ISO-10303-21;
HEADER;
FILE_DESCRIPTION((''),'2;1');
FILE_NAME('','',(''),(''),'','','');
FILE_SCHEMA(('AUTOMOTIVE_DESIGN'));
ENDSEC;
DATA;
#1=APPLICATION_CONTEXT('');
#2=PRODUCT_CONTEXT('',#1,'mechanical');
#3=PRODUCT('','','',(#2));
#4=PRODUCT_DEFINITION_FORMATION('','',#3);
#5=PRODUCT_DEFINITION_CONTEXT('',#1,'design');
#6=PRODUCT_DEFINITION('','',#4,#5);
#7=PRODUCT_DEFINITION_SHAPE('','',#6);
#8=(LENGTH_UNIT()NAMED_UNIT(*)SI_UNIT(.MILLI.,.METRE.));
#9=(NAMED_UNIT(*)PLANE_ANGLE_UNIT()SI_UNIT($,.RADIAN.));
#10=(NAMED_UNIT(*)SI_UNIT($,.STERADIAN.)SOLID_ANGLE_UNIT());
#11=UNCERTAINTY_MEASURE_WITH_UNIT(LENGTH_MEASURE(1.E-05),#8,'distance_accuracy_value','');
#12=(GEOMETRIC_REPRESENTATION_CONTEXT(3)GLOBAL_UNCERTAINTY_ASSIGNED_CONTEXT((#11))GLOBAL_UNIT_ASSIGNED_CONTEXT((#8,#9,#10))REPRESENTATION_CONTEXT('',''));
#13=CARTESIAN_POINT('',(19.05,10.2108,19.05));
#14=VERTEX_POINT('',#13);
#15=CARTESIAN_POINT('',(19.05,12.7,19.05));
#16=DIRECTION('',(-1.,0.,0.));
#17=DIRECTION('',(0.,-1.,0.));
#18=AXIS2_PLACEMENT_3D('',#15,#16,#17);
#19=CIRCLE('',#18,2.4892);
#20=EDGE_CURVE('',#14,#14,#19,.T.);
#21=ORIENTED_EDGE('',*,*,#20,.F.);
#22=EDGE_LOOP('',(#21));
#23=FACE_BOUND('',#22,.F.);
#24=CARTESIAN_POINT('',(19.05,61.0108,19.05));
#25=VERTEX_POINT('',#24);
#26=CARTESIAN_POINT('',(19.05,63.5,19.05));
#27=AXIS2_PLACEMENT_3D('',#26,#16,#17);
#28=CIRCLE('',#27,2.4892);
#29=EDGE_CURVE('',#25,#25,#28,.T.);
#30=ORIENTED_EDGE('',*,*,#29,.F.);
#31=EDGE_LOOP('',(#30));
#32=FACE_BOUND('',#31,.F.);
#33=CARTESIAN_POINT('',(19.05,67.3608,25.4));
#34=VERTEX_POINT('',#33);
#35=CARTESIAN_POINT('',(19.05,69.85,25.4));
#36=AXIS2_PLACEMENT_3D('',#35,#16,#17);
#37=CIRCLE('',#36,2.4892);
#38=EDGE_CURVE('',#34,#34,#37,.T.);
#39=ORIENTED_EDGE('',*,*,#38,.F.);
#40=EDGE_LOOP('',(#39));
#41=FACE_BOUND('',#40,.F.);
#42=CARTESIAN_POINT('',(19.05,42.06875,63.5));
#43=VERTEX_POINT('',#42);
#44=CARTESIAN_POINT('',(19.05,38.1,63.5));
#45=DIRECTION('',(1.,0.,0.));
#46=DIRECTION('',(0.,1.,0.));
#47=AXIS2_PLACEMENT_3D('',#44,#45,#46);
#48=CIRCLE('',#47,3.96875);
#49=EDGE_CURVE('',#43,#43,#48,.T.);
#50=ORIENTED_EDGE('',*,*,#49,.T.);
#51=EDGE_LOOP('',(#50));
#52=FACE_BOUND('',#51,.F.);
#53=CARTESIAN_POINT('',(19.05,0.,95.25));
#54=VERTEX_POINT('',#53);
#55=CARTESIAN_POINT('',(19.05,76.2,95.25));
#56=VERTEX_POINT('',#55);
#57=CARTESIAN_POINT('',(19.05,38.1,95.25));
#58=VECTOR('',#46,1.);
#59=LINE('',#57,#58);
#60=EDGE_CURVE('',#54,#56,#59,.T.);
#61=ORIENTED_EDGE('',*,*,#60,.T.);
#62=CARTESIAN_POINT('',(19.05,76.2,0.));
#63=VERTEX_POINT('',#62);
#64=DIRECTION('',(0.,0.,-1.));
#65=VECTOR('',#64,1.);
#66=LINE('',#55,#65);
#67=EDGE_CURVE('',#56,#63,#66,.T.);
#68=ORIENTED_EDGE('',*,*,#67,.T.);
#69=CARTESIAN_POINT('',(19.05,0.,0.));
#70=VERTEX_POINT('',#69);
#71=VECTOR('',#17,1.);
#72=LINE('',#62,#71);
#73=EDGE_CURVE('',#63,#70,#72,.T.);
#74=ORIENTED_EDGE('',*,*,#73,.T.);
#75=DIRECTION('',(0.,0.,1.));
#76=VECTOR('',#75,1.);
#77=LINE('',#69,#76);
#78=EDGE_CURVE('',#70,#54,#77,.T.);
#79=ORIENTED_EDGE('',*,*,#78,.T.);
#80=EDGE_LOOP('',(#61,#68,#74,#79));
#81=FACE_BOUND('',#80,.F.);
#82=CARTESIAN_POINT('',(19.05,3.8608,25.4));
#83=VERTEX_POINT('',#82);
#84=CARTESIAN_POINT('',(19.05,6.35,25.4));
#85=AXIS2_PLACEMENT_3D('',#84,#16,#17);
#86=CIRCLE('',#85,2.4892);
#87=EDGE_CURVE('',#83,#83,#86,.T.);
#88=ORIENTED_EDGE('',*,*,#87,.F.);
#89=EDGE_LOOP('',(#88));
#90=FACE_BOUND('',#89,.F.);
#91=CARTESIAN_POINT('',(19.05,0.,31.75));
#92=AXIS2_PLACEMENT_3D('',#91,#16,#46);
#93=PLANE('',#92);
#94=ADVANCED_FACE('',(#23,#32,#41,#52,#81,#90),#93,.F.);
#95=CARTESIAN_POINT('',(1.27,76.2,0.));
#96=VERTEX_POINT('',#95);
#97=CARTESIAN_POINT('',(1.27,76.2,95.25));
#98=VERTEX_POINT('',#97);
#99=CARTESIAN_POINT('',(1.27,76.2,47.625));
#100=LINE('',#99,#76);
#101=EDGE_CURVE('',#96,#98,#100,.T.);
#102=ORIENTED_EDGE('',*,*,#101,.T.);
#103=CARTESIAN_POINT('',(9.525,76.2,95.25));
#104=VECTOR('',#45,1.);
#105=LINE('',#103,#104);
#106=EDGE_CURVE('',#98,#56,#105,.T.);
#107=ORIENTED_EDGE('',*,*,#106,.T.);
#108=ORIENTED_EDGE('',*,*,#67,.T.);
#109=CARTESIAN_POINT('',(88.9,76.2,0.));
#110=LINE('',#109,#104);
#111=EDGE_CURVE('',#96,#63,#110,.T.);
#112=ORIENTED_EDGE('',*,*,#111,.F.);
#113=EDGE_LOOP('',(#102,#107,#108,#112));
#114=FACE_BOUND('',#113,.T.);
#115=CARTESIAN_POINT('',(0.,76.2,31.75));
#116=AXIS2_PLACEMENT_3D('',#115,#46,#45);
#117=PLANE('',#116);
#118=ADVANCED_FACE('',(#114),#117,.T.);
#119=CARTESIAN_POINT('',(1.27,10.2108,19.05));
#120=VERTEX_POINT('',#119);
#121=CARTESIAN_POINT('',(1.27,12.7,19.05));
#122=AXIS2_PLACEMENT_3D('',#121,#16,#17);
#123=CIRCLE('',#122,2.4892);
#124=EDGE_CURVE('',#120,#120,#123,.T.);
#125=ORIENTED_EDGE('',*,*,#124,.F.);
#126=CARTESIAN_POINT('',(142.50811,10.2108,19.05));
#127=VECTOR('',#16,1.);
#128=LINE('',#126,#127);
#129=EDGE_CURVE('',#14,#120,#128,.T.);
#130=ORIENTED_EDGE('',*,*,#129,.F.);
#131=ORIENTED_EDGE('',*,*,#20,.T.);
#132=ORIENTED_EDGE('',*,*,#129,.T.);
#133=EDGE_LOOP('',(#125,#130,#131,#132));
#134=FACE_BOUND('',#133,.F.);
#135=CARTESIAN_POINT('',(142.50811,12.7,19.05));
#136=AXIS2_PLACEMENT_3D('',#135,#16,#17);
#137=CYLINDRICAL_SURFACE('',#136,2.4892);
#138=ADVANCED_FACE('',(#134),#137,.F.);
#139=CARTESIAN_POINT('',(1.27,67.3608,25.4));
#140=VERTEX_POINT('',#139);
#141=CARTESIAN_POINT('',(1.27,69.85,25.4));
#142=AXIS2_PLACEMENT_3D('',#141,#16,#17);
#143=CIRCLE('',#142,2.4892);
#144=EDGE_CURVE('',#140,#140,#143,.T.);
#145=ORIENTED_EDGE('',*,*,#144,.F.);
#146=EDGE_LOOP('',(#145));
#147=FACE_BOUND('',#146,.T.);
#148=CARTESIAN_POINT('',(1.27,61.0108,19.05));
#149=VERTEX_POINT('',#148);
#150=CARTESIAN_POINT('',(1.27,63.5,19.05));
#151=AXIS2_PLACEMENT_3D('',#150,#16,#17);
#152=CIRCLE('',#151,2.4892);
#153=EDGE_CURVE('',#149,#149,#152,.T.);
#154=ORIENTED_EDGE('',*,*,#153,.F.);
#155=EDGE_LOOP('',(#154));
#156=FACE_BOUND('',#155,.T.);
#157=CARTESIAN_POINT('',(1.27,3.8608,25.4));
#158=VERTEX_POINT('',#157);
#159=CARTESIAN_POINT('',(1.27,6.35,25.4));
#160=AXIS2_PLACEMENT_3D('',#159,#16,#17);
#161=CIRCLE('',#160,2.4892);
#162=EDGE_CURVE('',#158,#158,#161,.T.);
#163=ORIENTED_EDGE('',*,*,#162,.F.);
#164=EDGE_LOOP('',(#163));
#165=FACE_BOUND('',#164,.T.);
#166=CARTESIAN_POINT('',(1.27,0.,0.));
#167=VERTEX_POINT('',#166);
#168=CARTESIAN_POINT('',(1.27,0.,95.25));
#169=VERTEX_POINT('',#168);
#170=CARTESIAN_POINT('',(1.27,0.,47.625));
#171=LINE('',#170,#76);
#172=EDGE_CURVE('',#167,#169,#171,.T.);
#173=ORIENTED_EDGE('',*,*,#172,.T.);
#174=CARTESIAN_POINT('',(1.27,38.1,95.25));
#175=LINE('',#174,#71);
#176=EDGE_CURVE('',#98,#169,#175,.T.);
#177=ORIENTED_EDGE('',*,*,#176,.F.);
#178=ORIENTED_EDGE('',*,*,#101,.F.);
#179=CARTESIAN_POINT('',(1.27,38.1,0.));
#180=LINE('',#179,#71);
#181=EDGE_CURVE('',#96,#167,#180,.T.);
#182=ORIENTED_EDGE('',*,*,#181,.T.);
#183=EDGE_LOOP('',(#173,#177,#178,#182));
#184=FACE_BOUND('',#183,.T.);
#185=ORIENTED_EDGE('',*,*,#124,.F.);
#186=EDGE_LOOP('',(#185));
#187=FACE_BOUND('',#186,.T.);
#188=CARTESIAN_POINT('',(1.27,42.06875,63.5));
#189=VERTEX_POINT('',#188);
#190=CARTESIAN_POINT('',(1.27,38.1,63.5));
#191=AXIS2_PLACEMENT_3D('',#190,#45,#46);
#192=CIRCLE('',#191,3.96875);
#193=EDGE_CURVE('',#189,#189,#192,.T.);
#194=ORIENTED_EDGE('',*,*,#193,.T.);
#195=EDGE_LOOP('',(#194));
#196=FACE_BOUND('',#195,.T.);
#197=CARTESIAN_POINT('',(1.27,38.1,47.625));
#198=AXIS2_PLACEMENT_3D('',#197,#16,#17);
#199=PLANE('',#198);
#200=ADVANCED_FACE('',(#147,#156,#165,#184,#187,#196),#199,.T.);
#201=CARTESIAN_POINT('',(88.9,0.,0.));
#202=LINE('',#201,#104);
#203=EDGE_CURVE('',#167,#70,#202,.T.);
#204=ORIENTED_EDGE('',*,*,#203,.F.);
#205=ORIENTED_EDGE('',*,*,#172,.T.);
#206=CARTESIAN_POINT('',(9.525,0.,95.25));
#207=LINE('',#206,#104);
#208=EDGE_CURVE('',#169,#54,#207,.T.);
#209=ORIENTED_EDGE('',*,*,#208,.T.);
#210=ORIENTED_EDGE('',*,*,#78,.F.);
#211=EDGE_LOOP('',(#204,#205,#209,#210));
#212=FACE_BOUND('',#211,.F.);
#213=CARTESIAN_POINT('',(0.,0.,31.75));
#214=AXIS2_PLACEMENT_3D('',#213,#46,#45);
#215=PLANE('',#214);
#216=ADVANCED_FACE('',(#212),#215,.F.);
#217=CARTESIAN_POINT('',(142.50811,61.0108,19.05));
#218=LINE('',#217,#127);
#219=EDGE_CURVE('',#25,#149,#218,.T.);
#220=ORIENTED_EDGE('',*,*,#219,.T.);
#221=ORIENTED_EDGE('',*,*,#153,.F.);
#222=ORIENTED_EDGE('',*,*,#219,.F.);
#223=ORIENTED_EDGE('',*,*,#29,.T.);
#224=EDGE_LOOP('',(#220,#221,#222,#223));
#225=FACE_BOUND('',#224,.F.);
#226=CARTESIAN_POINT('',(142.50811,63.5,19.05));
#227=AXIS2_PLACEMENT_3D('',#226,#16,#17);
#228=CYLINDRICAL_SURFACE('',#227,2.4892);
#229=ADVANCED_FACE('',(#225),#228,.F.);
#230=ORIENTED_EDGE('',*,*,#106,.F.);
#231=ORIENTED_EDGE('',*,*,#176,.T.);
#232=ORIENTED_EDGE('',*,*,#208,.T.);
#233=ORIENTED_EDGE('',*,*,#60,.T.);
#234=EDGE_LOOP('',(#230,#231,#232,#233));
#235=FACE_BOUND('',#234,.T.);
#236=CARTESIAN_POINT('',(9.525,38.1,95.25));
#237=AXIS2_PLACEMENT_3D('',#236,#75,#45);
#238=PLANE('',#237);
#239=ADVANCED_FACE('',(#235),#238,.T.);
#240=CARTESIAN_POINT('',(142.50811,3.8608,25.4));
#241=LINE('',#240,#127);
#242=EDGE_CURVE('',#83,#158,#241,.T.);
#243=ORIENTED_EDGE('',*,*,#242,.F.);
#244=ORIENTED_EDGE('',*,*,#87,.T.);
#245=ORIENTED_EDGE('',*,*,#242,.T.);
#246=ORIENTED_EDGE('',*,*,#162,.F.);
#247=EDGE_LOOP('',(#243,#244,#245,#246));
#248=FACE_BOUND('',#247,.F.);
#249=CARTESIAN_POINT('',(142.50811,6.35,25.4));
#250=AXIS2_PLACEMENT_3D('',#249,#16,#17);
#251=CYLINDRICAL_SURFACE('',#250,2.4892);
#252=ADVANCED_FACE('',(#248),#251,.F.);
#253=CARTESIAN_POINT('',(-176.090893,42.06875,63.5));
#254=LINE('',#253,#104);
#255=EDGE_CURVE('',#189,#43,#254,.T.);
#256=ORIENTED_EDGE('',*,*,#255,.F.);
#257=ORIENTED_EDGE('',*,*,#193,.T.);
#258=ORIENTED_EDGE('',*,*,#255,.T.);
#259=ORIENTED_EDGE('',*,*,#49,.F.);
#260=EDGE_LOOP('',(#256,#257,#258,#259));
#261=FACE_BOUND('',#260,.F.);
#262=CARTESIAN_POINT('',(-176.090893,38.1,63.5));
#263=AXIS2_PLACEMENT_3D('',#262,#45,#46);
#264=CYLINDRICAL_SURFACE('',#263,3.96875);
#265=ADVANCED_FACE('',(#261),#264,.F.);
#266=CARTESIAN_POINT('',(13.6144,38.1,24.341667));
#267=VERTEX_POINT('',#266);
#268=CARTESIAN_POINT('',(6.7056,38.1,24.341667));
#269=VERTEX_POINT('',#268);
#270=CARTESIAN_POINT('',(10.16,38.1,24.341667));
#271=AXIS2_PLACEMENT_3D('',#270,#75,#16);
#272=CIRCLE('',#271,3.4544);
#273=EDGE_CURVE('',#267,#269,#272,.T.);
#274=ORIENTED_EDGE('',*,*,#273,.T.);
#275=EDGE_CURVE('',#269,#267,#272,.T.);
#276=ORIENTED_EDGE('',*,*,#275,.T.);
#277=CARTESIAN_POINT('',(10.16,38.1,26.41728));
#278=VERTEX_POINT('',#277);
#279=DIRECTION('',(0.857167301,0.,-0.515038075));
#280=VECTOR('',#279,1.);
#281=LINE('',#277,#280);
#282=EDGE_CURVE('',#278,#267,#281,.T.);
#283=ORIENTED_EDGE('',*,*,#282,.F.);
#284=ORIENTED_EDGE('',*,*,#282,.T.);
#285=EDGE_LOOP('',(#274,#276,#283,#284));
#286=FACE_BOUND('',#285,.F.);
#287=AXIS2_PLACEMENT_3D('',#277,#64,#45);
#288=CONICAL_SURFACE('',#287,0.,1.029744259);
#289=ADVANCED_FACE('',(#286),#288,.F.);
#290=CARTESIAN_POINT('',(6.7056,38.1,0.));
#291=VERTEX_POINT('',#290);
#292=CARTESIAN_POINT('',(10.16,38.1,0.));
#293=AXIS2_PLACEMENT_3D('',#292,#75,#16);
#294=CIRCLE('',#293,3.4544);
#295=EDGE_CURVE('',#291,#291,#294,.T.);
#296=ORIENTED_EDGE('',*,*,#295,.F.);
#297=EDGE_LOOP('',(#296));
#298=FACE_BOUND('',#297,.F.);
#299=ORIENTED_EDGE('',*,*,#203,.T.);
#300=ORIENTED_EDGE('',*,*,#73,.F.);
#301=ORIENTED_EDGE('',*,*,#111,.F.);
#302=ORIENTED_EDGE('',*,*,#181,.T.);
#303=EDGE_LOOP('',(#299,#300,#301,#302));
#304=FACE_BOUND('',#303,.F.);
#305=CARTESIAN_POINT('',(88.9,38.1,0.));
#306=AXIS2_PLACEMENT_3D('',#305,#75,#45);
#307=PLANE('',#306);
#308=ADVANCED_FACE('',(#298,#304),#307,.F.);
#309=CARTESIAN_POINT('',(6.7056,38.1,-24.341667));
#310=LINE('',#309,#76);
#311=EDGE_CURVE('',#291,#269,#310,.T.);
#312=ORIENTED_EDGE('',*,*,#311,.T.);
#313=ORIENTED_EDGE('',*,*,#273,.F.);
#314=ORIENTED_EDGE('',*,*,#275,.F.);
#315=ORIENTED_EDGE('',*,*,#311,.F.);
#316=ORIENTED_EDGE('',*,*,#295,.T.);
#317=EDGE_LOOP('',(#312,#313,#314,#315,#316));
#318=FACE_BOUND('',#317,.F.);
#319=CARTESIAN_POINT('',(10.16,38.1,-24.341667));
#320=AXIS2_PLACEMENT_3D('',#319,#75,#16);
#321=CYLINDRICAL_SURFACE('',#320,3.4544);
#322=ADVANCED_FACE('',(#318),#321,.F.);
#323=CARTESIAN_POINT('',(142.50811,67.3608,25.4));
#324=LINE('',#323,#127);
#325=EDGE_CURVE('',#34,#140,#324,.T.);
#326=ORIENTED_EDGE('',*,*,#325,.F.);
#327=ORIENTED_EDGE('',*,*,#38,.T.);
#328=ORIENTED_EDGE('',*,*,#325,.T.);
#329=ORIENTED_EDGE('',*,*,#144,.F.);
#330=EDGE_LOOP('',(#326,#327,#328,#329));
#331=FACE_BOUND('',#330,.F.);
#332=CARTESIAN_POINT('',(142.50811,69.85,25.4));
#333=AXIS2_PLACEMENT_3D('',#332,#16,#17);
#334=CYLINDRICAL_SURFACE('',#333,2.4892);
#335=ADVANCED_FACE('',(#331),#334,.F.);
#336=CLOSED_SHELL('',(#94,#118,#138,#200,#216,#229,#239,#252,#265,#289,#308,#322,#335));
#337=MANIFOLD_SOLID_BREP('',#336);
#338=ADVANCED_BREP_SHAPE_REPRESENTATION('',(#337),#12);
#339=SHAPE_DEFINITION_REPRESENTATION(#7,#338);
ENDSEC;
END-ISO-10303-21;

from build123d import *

# Parameters (mm, degrees)
F0_W      = 177.8
F0_H      = 76.2
F1_DEPTH  = 31.75
F2_W      = 19.05
F2_H      = 76.2
F3_DEPTH  = 63.5
F4_W      = 107.95
F4_H      = 38.1
F5_DEPTH  = 31.751
F6_W      = 107.95
F6_H      = 19.05
F7_DEPTH  = 12.7
F8_W      = 76.2
F8_H      = 31.75
F9_DEPTH  = 50.8
F11_D     = 6.5278
F11_DEPTH = 12.7
F11_TIP   = 1.9611489744
F14_D     = 7.9375
F15_W     = 19.05
F15_H     = 19.05
F15_R     = 3.2639
F12_W     = 19.05
F12_H     = 19.05
F12_R     = 3.2639
F16_DEPTH = 107.95
F18_D     = 4.9784
F19_W     = 76.2
F19_H     = 95.25
F19_R     = 2.4892
F19_R_2   = 3.96875
F20_DEPTH = 1.27
F22_D     = 6.9088
F22_DEPTH = 24.3416666667
F22_TIP   = 2.0756129224


with BuildPart() as f1:
    # F0 (on Top) → F1 (new body)
    with BuildSketch(Plane.XY):
        with Locations((88.9, 38.1)):
            Rectangle(F0_W, F0_H)
    extrude(amount=F1_DEPTH)

    # F2 (on face) → F3 (join)
    with BuildSketch(Plane.XY.offset(31.75)):
        with Locations((9.525, 38.1)):
            Rectangle(F2_W, F2_H)
    extrude(amount=F3_DEPTH)

    # F4 (on face) → F5 (cut, through all)
    with BuildSketch(Plane.XY.offset(31.75)):
        with Locations((73.025, 38.1)):
            Rectangle(F4_W, F4_H)
    extrude(amount=-F5_DEPTH, mode=Mode.SUBTRACT)

    # F6 (on face) → F7 (cut)
    with BuildSketch(Plane(origin=(0, 0, 0), x_dir=(1, 0, 0), z_dir=(0, 0, -1))):
        with Locations((73.025, -9.525)):
            Rectangle(F6_W, F6_H)
        with Locations((73.025, -66.675)):
            Rectangle(F6_W, F6_H)
    extrude(amount=-F7_DEPTH, mode=Mode.SUBTRACT)

    # F8 (on face) → F9 (cut)
    with BuildSketch(Plane.YZ.offset(177.8)):
        with Locations((38.1, 15.875)):
            Rectangle(F8_W, F8_H)
    extrude(amount=-F9_DEPTH, mode=Mode.SUBTRACT)

    # F11
    with Locations(Plane.YZ.offset(127)):
        with Locations((66.675, 22.225), (9.525, 22.225)):
            Hole(F11_D / 2, depth=F11_DEPTH)
            with Locations((0, 0, -(F11_DEPTH + F11_TIP / 2))):  # 118° drill point
                Cone(0, F11_D / 2, F11_TIP, mode=Mode.SUBTRACT)

    # F14 (through all)
    with Locations(Plane(origin=(0, 0, 0), x_dir=(0, -1, 0), z_dir=(-1, 0, 0))):
        with Locations((-38.1, 63.5)):
            Hole(F14_D / 2)

    # F15 (on face) + F12 (on face) → F16 (cut)
    with BuildSketch(Plane.YZ.offset(127)):
        with Locations((66.675, 22.225)):
            Rectangle(F15_W, F15_H)
        with Locations((66.675, 22.225)):
            Circle(F15_R, mode=Mode.SUBTRACT)
        with Locations((9.525, 22.225)):
            Rectangle(F15_W, F15_H)
        with Locations((9.525, 22.225)):
            Circle(F15_R, mode=Mode.SUBTRACT)
        with Locations((9.525, 22.225)):
            Circle(F15_R)
    with BuildSketch(Plane.YZ.offset(127)):
        with Locations((66.675, 22.225)):
            Rectangle(F12_W, F12_H)
        with Locations((66.675, 22.225)):
            Circle(F12_R, mode=Mode.SUBTRACT)
        with Locations((66.675, 22.225)):
            Circle(F12_R)
    extrude(amount=-F16_DEPTH, mode=Mode.SUBTRACT)

    # F18 (through all)
    with Locations(Plane.YZ.offset(19.05)):
        with Locations((6.35, 25.4), (12.7, 19.05), (63.5, 19.05), (69.85, 25.4)):
            Hole(F18_D / 2)

    # F19 (on face) → F20 (cut)
    with BuildSketch(Plane(origin=(0, 0, 0), x_dir=(0, -1, 0), z_dir=(-1, 0, 0))):
        with Locations((-38.1, 47.625)):
            Rectangle(F19_W, F19_H)
        with Locations((-63.5, 19.05)):
            Circle(F19_R, mode=Mode.SUBTRACT)
        with Locations((-69.85, 25.4)):
            Circle(F19_R, mode=Mode.SUBTRACT)
        with Locations((-12.7, 19.05)):
            Circle(F19_R, mode=Mode.SUBTRACT)
        with Locations((-6.35, 25.4)):
            Circle(F19_R, mode=Mode.SUBTRACT)
        with Locations((-38.1, 63.5)):
            Circle(F19_R_2, mode=Mode.SUBTRACT)
    extrude(amount=-F20_DEPTH, mode=Mode.SUBTRACT)

    # F22
    with Locations(Plane(origin=(0, 0, 0), x_dir=(1, 0, 0), z_dir=(0, 0, -1))):
        with Locations((10.16, -38.1)):
            Hole(F22_D / 2, depth=F22_DEPTH)
            with Locations((0, 0, -(F22_DEPTH + F22_TIP / 2))):  # 118° drill point
                Cone(0, F22_D / 2, F22_TIP, mode=Mode.SUBTRACT)


solid = f1.part
